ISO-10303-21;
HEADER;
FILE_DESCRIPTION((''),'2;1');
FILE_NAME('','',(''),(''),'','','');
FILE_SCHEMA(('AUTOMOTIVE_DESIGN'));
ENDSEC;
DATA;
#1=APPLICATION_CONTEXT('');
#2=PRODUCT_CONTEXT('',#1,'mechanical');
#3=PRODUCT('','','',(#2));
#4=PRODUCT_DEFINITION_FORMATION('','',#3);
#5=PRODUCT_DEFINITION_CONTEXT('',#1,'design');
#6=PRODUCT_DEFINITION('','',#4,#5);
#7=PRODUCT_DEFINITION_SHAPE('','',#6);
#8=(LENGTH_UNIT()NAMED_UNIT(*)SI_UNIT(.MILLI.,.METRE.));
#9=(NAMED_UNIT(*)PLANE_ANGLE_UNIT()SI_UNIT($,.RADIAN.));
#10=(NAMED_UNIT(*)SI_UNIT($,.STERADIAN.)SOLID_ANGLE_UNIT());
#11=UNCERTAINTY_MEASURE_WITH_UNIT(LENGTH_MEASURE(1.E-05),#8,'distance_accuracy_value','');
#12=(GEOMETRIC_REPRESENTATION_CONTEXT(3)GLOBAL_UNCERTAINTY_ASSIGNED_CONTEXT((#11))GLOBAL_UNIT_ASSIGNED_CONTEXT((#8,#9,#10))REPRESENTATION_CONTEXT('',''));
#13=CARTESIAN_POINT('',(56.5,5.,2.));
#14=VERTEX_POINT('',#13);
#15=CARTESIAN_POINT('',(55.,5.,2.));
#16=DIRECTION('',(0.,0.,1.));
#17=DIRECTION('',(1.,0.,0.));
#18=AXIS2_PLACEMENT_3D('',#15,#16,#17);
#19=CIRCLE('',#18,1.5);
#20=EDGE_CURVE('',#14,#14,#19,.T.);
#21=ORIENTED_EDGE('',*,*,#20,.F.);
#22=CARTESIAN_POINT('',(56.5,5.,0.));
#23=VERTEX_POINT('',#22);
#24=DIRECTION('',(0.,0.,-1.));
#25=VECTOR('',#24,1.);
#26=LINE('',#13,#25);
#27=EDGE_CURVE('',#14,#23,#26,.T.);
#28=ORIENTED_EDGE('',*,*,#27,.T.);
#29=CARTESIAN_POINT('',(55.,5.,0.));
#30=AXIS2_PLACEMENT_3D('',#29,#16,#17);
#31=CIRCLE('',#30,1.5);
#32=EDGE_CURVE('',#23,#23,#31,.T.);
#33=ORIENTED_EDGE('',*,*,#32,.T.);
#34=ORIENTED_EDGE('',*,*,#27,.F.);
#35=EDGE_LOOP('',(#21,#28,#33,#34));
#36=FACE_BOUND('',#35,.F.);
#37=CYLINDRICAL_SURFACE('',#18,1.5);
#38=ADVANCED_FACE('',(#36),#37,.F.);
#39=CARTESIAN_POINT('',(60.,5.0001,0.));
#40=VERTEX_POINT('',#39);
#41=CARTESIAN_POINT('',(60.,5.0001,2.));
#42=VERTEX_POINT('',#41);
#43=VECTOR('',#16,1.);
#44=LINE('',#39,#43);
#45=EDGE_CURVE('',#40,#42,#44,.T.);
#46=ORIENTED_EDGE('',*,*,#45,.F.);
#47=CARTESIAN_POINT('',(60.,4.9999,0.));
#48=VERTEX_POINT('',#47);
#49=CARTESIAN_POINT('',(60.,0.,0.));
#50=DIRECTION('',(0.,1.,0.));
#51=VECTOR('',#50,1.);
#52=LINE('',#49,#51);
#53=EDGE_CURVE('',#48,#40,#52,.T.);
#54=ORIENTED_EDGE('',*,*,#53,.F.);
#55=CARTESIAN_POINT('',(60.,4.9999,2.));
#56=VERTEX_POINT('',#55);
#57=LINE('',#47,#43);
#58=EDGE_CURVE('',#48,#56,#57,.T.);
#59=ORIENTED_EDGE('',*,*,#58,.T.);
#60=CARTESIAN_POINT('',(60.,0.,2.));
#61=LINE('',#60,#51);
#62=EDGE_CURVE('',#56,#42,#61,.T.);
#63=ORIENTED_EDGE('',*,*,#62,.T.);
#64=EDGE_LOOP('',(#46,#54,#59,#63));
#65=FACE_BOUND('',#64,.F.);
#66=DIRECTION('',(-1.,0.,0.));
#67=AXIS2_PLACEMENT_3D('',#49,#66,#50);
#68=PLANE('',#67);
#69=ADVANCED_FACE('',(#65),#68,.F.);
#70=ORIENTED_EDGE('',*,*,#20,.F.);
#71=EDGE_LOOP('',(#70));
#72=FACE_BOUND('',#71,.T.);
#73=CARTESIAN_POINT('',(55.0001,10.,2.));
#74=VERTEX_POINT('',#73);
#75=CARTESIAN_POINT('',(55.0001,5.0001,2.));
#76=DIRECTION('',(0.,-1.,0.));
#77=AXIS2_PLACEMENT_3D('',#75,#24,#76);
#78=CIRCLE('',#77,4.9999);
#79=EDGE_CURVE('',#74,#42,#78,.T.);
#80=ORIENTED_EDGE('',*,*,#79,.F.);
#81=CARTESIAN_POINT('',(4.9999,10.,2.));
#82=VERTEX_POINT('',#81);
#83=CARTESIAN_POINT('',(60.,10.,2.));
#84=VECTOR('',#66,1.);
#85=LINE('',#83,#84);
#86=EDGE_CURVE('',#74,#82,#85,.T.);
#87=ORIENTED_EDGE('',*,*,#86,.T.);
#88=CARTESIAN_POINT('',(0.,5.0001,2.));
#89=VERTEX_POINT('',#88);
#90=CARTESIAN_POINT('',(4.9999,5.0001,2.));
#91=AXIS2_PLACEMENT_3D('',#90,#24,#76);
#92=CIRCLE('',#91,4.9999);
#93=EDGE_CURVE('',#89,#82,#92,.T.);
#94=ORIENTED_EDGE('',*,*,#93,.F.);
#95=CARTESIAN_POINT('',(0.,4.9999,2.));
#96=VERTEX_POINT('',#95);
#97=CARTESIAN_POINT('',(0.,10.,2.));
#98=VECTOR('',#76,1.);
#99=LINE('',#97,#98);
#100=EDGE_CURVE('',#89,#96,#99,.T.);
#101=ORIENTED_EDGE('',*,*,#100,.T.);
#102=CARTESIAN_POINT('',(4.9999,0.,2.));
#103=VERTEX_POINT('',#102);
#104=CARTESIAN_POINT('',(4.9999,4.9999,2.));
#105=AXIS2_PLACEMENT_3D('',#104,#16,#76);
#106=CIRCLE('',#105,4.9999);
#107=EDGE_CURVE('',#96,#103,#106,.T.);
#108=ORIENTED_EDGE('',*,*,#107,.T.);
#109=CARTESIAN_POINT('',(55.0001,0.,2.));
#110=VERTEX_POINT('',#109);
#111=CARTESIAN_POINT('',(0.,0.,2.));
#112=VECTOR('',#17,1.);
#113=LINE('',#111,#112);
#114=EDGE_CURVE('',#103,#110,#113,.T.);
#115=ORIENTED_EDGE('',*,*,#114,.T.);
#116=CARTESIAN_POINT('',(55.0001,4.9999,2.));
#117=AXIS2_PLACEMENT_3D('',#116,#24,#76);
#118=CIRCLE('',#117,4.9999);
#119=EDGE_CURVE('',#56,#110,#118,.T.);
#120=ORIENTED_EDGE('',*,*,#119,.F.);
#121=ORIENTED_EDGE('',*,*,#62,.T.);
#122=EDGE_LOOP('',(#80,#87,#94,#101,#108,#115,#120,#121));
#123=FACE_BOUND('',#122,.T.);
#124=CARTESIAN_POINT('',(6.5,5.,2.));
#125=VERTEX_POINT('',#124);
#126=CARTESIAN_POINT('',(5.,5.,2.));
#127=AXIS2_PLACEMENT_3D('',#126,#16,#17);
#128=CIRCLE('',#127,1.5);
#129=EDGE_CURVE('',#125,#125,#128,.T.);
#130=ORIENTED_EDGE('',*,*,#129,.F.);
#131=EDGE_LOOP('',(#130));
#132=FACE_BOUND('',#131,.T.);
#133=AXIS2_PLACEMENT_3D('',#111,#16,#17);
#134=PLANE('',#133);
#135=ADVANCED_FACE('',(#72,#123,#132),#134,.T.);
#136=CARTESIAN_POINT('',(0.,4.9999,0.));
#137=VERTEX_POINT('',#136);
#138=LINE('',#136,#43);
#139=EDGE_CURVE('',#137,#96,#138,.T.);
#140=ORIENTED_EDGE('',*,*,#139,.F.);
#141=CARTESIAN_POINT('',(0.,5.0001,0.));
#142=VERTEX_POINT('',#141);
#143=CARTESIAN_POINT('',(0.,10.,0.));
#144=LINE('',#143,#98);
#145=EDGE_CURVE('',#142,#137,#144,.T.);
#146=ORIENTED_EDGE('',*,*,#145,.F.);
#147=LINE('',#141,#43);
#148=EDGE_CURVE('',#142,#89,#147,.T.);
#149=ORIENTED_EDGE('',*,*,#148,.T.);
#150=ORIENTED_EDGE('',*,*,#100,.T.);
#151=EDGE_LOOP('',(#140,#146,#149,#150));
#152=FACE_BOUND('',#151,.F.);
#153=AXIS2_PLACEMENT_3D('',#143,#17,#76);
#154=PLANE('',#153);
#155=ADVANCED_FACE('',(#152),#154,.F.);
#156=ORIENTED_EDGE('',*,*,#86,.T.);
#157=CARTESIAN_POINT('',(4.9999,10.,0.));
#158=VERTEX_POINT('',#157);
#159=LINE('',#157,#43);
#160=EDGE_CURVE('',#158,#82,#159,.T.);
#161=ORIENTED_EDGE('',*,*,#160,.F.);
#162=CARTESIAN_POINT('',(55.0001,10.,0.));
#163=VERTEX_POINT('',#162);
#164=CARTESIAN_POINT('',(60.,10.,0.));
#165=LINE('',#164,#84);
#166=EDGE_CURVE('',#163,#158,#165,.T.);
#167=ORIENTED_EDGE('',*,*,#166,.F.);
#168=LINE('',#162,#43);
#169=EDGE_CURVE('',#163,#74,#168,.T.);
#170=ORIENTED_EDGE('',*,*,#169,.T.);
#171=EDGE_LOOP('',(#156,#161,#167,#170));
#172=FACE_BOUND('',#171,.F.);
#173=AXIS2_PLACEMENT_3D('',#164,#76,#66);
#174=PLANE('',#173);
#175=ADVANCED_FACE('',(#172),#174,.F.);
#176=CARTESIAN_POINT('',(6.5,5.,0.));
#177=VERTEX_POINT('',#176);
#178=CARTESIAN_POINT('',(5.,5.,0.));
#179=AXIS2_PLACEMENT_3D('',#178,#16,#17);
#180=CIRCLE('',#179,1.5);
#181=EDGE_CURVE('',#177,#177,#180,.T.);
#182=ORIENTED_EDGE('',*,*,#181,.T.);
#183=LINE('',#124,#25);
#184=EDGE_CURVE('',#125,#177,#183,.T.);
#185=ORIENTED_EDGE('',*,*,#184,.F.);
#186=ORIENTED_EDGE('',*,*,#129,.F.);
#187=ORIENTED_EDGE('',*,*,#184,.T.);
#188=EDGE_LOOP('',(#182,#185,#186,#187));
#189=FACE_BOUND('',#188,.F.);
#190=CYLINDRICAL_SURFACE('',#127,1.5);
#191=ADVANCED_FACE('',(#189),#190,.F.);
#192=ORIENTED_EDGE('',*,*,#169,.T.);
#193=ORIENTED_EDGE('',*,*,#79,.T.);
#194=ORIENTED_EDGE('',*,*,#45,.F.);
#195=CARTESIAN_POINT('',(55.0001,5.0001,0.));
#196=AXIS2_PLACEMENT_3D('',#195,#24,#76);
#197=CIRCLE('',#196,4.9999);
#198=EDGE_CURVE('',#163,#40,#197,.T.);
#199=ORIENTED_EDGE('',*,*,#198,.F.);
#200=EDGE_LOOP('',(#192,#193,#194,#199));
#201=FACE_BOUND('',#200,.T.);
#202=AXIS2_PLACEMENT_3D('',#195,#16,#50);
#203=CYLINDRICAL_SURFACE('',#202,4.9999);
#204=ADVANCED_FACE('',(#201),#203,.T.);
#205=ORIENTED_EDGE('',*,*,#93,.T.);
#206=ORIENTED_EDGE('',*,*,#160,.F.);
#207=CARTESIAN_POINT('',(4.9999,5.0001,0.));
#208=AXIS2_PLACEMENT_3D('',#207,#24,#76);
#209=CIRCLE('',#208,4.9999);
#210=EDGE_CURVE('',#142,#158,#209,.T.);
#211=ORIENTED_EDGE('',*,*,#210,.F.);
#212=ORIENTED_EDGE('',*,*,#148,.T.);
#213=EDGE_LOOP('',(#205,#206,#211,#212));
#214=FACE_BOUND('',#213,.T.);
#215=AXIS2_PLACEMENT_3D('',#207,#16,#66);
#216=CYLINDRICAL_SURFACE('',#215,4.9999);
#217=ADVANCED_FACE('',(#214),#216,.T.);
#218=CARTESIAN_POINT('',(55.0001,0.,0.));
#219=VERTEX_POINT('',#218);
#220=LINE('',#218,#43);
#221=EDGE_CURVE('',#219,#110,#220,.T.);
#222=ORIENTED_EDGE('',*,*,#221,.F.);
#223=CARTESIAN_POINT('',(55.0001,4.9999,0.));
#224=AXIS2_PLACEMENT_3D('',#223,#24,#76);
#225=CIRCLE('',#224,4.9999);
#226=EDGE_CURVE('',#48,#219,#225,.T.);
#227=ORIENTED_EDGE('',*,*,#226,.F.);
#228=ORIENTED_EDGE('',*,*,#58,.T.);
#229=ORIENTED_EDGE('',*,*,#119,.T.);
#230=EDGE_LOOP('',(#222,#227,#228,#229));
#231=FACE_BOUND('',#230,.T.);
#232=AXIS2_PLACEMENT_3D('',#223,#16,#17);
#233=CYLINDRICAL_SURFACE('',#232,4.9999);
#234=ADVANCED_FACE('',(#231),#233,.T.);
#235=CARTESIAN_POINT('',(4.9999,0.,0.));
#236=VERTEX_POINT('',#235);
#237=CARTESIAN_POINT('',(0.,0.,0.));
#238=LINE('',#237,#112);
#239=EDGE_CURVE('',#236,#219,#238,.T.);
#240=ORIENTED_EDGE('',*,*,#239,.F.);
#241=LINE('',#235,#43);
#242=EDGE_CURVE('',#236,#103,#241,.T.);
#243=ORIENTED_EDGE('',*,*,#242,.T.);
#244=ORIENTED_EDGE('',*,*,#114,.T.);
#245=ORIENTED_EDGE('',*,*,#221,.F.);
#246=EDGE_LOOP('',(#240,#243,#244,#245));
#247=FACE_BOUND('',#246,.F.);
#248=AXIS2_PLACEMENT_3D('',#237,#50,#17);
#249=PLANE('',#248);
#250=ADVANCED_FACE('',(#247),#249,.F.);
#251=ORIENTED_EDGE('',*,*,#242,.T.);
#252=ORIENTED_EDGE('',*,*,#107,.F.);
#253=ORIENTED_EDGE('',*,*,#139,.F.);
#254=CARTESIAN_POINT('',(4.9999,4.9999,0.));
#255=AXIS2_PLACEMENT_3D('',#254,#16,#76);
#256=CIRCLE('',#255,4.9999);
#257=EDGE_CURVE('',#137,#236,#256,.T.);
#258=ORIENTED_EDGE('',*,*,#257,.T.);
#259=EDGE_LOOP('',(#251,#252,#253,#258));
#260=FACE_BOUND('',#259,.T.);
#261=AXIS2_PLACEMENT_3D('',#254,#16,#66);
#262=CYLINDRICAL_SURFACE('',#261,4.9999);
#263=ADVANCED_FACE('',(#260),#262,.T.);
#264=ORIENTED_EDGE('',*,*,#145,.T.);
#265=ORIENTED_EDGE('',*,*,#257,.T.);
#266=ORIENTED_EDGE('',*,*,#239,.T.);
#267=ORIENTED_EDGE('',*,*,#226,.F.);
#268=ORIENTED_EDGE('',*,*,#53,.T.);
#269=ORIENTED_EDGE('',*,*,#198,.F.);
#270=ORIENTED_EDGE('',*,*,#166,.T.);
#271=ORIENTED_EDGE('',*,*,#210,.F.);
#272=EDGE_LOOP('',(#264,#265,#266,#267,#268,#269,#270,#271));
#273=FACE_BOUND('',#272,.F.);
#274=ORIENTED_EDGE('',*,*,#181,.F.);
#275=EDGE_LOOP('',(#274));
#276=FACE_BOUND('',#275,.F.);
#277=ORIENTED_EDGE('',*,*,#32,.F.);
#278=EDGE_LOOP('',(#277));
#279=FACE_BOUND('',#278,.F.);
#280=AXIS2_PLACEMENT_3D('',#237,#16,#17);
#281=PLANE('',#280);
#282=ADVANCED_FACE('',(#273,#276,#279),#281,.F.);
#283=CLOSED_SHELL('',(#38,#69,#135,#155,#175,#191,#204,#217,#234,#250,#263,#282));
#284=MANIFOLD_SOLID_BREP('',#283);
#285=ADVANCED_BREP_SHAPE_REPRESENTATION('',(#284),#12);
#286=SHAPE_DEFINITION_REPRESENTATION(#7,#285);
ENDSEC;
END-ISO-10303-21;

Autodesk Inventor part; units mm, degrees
ref_plane "YZ Plane" through (0, 0, 0) normal (1, 0, 0) x (0, 1, 0)
ref_plane "XZ Plane" through (0, 0, 0) normal (0, 1, 0) x (-1, 0, 0)
ref_plane "XY Plane" through (0, 0, 0) normal (0, 0, 1) x (1, 0, 0)
sketch "Sketch1" plane through (0, 0, 0) normal (0, 0, 1) x (1, 0, 0)
  line L0 (0, 0) -> (60, 0)
  line L1 (60, 0) -> (60, 10)
  line L2 (60, 10) -> (0, 10)
  line L3 (0, 10) -> (0, 0)
  dimension "d0" = 60
  dimension "d1" = 10
extrude "Extrusion1" add sketch "Sketch1" along normal blind 2
fillet "Fillet1" radius 5 4 edges at (60, 10, 1) (60, 0, 1) (0, 0, 1) (0, 10, 1)
sketch "Sketch2" plane through (0, 0, 2) normal (0, 0, 1) x (1, 0, 0)
  arc A0 (5, 10) -> (5, 0) centre (5, 5) ccw projected
  circle A1 centre (5, 5) radius 1.5
  arc A2 (55, 0) -> (55, 10) centre (55, 5) ccw projected
  circle A3 centre (55, 5) radius 1.5
  point P0 (0, 0)
  dimension "d5" = 3
  dimension "d6" = 3
extrude "Extrusion2" cut sketch "Sketch2" against normal blind 2
properties part number "Side support 1"
